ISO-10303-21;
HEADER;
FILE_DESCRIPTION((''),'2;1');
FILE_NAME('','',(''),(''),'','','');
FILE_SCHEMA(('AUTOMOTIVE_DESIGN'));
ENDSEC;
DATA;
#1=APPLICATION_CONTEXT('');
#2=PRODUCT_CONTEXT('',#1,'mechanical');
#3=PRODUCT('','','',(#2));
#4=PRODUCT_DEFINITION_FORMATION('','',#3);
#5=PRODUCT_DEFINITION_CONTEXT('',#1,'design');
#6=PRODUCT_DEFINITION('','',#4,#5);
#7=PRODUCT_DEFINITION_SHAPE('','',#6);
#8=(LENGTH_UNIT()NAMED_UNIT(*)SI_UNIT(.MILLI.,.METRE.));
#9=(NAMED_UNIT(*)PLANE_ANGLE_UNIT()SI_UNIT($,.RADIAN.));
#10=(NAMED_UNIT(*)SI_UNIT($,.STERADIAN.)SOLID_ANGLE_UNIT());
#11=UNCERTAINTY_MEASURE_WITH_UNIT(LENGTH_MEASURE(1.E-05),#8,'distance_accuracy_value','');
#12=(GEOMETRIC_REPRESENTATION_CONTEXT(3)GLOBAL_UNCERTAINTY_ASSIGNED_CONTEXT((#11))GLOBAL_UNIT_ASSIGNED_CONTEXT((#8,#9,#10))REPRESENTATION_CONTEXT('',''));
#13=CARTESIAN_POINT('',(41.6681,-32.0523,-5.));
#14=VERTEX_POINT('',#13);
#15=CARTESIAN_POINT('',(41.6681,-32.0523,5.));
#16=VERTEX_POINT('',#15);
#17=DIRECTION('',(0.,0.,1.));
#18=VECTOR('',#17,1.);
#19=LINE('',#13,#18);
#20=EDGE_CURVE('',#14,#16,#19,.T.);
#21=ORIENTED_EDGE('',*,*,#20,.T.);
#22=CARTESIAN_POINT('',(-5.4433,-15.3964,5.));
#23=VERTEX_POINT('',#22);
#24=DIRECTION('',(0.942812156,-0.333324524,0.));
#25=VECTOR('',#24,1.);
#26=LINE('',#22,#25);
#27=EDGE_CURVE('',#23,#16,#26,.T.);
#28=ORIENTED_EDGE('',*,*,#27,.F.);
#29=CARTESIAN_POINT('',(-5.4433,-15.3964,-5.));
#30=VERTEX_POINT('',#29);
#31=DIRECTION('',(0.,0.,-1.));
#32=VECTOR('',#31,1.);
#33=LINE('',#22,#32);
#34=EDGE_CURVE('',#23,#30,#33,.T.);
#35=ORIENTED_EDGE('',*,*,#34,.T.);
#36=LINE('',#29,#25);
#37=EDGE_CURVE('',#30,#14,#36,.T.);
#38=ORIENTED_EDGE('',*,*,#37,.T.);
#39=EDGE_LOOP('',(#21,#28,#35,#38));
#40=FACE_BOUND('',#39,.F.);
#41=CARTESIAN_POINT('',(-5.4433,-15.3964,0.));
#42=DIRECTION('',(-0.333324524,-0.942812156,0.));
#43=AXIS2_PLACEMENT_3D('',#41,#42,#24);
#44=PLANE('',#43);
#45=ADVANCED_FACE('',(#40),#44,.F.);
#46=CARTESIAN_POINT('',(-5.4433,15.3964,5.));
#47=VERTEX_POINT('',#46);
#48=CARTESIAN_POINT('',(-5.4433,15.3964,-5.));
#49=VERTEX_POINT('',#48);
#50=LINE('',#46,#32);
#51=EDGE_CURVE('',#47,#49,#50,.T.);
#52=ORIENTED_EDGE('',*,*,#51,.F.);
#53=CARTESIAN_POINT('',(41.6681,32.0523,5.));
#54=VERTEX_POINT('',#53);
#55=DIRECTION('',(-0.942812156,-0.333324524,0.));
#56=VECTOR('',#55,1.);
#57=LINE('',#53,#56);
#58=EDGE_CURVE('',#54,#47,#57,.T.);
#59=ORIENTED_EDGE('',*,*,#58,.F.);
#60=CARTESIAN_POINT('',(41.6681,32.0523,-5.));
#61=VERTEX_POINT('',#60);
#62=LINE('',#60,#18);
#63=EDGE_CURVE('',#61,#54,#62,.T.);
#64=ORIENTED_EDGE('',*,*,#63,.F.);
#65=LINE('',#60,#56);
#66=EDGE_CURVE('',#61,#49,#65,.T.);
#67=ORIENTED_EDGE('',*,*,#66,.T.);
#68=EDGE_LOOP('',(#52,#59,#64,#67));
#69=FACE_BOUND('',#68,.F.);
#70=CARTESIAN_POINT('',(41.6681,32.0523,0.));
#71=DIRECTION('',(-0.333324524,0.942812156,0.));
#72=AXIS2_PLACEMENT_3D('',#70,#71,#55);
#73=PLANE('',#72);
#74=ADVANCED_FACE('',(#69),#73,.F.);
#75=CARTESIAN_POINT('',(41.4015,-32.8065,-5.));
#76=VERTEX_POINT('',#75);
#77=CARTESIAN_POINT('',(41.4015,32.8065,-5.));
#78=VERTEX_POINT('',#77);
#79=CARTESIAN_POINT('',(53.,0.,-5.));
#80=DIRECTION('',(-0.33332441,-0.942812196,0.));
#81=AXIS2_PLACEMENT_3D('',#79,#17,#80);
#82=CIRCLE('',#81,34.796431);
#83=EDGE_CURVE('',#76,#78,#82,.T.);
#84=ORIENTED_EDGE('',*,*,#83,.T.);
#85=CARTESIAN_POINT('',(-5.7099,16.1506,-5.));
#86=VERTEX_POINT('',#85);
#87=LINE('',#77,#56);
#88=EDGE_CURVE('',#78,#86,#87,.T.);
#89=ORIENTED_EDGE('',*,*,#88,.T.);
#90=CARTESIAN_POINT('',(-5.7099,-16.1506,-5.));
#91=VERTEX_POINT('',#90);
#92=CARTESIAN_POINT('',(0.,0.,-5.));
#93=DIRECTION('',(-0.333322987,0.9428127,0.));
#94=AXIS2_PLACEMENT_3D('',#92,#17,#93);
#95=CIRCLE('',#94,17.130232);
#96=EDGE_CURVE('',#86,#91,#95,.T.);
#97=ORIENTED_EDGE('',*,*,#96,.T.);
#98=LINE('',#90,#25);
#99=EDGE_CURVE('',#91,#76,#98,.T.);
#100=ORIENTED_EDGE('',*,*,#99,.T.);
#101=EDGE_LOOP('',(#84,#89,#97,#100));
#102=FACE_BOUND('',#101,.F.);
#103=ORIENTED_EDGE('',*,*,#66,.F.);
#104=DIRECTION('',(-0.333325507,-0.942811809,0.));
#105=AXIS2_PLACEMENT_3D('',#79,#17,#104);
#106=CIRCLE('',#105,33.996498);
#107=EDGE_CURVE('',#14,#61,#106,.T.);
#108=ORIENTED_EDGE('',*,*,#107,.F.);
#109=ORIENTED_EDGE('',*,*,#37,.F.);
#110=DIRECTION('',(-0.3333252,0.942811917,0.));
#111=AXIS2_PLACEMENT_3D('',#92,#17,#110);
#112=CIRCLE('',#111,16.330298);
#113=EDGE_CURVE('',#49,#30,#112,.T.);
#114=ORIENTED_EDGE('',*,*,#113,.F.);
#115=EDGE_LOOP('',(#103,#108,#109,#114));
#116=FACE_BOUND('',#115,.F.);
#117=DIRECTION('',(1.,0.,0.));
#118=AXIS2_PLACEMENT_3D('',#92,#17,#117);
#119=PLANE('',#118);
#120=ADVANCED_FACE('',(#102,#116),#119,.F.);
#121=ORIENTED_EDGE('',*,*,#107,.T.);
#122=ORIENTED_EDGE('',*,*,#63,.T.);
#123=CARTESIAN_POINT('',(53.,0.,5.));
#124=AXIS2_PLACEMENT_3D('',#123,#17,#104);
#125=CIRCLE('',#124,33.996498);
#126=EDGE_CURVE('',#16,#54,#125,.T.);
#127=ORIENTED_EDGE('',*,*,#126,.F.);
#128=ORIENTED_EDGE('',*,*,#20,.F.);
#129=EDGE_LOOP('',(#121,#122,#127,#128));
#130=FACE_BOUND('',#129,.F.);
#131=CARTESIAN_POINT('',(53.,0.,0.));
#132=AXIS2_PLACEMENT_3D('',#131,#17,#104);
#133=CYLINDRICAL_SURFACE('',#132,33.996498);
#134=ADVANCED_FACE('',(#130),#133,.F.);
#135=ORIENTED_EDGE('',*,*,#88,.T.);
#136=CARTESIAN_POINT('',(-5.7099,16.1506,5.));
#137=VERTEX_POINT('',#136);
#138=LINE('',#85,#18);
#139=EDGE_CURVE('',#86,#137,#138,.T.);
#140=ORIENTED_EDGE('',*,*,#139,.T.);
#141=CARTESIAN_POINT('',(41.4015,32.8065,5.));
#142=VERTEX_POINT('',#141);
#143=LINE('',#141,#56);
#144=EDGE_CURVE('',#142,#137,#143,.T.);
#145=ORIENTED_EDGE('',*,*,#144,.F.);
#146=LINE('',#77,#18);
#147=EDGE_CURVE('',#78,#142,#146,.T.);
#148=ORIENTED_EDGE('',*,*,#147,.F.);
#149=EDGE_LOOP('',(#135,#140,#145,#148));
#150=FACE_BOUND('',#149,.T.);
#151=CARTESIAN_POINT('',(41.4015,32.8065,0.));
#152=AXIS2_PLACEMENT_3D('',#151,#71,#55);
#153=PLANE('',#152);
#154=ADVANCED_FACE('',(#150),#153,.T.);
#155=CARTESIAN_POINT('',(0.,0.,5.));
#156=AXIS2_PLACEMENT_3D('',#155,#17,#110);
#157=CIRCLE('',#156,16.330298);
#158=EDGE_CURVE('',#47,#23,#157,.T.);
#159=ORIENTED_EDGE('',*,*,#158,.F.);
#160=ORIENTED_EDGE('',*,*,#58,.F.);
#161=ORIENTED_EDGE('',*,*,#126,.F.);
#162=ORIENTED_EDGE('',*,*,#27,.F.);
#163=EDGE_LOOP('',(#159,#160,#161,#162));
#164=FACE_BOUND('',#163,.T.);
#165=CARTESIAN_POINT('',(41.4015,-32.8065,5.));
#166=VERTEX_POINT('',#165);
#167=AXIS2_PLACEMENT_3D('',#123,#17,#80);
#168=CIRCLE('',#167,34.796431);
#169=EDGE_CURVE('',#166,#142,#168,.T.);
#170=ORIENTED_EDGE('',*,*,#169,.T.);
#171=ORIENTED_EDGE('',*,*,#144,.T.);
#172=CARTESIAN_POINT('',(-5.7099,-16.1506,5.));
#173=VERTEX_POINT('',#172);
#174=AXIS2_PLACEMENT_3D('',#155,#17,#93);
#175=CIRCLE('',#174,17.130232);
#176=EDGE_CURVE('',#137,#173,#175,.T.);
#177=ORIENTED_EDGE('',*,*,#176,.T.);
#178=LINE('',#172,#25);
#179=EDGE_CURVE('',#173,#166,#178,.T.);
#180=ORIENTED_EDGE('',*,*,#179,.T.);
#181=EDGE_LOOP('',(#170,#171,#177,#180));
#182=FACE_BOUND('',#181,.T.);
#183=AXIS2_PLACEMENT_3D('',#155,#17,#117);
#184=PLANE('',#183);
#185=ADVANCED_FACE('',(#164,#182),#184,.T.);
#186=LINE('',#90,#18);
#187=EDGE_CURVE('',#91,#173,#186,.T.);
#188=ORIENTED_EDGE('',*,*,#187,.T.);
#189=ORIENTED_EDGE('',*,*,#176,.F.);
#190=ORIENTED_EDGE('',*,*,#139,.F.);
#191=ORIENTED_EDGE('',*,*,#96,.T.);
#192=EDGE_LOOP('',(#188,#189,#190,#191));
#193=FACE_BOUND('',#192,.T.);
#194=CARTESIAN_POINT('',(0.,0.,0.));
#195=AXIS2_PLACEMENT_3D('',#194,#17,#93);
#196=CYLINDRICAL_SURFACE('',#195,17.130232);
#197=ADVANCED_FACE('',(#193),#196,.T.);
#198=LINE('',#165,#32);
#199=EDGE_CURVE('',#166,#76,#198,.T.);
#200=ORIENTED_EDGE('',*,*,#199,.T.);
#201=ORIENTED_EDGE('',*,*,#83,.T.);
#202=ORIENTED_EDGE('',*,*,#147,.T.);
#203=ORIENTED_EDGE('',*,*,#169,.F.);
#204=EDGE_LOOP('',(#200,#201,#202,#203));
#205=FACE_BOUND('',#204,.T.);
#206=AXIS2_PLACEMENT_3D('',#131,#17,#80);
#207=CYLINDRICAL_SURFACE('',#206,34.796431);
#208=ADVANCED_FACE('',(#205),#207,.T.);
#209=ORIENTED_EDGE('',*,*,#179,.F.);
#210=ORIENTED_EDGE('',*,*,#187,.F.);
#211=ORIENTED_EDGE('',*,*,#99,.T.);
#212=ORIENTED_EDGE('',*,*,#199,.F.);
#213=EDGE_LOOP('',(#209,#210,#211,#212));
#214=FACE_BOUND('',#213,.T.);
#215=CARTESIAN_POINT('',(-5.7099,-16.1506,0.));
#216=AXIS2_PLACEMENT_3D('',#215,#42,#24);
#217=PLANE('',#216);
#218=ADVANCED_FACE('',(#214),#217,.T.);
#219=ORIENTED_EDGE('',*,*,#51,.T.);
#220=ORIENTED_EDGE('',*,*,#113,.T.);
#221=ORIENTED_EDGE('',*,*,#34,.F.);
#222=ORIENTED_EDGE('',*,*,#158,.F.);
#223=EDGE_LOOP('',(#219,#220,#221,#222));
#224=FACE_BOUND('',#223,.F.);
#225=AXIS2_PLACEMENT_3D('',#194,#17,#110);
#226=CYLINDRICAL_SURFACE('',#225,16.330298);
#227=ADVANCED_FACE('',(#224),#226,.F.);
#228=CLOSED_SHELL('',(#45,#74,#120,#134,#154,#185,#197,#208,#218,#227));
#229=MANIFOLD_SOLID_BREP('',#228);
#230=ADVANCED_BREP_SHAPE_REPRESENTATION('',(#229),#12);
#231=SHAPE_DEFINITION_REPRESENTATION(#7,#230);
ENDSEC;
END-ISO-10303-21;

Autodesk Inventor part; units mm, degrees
ref_plane "YZ Plane" through (0, 0, 0) normal (1, 0, 0) x (0, 1, 0)
ref_plane "XZ Plane" through (0, 0, 0) normal (0, 1, 0) x (-1, 0, 0)
ref_plane "XY Plane" through (0, 0, 0) normal (0, 0, 1) x (1, 0, 0)
sketch "スケッチ1" plane through (0, 0, 0) normal (0, 0, 1) x (1, 0, 0)
  arc A0 (-5.5703, 15.7556) -> (-5.5703, -15.7556) centre (0, 0) ccw
  arc A1 (41.5411, -32.4115) -> (41.5411, 32.4115) centre (53, 0) ccw
  line L0 (-5.5703, 15.7556) -> (41.5411, 32.4115)
  line L1 (-5.5703, -15.7556) -> (41.5411, -32.4115)
  line L2 (41.4015, 32.8065) -> (-5.7099, 16.1506)
  arc A2 (-5.7099, 16.1506) -> (-5.7099, -16.1506) centre (0, 0) ccw
  line L3 (-5.7099, -16.1506) -> (41.4015, -32.8065)
  arc A3 (41.4015, -32.8065) -> (41.4015, 32.8065) centre (53, 0) ccw
  line L4 (41.6681, 32.0523) -> (-5.4433, 15.3964)
  arc A4 (-5.4433, 15.3964) -> (-5.4433, -15.3964) centre (0, 0) ccw
  line L5 (-5.4433, -15.3964) -> (41.6681, -32.0523)
  arc A5 (41.6681, -32.0523) -> (41.6681, 32.0523) centre (53, 0) ccw
  dimension "d6" = 33.4225
  dimension "d7" = 68.7549
  dimension "d8" = 53
  dimension "d11" = 0.419
  dimension "d12" = 0.8
extrude "押し出し1" add sketch "スケッチ1" along normal mid plane 10 contours L0 A1 L1 A0 | A3 L3 A2 L2
properties part number "belt5" material "ゴム"
